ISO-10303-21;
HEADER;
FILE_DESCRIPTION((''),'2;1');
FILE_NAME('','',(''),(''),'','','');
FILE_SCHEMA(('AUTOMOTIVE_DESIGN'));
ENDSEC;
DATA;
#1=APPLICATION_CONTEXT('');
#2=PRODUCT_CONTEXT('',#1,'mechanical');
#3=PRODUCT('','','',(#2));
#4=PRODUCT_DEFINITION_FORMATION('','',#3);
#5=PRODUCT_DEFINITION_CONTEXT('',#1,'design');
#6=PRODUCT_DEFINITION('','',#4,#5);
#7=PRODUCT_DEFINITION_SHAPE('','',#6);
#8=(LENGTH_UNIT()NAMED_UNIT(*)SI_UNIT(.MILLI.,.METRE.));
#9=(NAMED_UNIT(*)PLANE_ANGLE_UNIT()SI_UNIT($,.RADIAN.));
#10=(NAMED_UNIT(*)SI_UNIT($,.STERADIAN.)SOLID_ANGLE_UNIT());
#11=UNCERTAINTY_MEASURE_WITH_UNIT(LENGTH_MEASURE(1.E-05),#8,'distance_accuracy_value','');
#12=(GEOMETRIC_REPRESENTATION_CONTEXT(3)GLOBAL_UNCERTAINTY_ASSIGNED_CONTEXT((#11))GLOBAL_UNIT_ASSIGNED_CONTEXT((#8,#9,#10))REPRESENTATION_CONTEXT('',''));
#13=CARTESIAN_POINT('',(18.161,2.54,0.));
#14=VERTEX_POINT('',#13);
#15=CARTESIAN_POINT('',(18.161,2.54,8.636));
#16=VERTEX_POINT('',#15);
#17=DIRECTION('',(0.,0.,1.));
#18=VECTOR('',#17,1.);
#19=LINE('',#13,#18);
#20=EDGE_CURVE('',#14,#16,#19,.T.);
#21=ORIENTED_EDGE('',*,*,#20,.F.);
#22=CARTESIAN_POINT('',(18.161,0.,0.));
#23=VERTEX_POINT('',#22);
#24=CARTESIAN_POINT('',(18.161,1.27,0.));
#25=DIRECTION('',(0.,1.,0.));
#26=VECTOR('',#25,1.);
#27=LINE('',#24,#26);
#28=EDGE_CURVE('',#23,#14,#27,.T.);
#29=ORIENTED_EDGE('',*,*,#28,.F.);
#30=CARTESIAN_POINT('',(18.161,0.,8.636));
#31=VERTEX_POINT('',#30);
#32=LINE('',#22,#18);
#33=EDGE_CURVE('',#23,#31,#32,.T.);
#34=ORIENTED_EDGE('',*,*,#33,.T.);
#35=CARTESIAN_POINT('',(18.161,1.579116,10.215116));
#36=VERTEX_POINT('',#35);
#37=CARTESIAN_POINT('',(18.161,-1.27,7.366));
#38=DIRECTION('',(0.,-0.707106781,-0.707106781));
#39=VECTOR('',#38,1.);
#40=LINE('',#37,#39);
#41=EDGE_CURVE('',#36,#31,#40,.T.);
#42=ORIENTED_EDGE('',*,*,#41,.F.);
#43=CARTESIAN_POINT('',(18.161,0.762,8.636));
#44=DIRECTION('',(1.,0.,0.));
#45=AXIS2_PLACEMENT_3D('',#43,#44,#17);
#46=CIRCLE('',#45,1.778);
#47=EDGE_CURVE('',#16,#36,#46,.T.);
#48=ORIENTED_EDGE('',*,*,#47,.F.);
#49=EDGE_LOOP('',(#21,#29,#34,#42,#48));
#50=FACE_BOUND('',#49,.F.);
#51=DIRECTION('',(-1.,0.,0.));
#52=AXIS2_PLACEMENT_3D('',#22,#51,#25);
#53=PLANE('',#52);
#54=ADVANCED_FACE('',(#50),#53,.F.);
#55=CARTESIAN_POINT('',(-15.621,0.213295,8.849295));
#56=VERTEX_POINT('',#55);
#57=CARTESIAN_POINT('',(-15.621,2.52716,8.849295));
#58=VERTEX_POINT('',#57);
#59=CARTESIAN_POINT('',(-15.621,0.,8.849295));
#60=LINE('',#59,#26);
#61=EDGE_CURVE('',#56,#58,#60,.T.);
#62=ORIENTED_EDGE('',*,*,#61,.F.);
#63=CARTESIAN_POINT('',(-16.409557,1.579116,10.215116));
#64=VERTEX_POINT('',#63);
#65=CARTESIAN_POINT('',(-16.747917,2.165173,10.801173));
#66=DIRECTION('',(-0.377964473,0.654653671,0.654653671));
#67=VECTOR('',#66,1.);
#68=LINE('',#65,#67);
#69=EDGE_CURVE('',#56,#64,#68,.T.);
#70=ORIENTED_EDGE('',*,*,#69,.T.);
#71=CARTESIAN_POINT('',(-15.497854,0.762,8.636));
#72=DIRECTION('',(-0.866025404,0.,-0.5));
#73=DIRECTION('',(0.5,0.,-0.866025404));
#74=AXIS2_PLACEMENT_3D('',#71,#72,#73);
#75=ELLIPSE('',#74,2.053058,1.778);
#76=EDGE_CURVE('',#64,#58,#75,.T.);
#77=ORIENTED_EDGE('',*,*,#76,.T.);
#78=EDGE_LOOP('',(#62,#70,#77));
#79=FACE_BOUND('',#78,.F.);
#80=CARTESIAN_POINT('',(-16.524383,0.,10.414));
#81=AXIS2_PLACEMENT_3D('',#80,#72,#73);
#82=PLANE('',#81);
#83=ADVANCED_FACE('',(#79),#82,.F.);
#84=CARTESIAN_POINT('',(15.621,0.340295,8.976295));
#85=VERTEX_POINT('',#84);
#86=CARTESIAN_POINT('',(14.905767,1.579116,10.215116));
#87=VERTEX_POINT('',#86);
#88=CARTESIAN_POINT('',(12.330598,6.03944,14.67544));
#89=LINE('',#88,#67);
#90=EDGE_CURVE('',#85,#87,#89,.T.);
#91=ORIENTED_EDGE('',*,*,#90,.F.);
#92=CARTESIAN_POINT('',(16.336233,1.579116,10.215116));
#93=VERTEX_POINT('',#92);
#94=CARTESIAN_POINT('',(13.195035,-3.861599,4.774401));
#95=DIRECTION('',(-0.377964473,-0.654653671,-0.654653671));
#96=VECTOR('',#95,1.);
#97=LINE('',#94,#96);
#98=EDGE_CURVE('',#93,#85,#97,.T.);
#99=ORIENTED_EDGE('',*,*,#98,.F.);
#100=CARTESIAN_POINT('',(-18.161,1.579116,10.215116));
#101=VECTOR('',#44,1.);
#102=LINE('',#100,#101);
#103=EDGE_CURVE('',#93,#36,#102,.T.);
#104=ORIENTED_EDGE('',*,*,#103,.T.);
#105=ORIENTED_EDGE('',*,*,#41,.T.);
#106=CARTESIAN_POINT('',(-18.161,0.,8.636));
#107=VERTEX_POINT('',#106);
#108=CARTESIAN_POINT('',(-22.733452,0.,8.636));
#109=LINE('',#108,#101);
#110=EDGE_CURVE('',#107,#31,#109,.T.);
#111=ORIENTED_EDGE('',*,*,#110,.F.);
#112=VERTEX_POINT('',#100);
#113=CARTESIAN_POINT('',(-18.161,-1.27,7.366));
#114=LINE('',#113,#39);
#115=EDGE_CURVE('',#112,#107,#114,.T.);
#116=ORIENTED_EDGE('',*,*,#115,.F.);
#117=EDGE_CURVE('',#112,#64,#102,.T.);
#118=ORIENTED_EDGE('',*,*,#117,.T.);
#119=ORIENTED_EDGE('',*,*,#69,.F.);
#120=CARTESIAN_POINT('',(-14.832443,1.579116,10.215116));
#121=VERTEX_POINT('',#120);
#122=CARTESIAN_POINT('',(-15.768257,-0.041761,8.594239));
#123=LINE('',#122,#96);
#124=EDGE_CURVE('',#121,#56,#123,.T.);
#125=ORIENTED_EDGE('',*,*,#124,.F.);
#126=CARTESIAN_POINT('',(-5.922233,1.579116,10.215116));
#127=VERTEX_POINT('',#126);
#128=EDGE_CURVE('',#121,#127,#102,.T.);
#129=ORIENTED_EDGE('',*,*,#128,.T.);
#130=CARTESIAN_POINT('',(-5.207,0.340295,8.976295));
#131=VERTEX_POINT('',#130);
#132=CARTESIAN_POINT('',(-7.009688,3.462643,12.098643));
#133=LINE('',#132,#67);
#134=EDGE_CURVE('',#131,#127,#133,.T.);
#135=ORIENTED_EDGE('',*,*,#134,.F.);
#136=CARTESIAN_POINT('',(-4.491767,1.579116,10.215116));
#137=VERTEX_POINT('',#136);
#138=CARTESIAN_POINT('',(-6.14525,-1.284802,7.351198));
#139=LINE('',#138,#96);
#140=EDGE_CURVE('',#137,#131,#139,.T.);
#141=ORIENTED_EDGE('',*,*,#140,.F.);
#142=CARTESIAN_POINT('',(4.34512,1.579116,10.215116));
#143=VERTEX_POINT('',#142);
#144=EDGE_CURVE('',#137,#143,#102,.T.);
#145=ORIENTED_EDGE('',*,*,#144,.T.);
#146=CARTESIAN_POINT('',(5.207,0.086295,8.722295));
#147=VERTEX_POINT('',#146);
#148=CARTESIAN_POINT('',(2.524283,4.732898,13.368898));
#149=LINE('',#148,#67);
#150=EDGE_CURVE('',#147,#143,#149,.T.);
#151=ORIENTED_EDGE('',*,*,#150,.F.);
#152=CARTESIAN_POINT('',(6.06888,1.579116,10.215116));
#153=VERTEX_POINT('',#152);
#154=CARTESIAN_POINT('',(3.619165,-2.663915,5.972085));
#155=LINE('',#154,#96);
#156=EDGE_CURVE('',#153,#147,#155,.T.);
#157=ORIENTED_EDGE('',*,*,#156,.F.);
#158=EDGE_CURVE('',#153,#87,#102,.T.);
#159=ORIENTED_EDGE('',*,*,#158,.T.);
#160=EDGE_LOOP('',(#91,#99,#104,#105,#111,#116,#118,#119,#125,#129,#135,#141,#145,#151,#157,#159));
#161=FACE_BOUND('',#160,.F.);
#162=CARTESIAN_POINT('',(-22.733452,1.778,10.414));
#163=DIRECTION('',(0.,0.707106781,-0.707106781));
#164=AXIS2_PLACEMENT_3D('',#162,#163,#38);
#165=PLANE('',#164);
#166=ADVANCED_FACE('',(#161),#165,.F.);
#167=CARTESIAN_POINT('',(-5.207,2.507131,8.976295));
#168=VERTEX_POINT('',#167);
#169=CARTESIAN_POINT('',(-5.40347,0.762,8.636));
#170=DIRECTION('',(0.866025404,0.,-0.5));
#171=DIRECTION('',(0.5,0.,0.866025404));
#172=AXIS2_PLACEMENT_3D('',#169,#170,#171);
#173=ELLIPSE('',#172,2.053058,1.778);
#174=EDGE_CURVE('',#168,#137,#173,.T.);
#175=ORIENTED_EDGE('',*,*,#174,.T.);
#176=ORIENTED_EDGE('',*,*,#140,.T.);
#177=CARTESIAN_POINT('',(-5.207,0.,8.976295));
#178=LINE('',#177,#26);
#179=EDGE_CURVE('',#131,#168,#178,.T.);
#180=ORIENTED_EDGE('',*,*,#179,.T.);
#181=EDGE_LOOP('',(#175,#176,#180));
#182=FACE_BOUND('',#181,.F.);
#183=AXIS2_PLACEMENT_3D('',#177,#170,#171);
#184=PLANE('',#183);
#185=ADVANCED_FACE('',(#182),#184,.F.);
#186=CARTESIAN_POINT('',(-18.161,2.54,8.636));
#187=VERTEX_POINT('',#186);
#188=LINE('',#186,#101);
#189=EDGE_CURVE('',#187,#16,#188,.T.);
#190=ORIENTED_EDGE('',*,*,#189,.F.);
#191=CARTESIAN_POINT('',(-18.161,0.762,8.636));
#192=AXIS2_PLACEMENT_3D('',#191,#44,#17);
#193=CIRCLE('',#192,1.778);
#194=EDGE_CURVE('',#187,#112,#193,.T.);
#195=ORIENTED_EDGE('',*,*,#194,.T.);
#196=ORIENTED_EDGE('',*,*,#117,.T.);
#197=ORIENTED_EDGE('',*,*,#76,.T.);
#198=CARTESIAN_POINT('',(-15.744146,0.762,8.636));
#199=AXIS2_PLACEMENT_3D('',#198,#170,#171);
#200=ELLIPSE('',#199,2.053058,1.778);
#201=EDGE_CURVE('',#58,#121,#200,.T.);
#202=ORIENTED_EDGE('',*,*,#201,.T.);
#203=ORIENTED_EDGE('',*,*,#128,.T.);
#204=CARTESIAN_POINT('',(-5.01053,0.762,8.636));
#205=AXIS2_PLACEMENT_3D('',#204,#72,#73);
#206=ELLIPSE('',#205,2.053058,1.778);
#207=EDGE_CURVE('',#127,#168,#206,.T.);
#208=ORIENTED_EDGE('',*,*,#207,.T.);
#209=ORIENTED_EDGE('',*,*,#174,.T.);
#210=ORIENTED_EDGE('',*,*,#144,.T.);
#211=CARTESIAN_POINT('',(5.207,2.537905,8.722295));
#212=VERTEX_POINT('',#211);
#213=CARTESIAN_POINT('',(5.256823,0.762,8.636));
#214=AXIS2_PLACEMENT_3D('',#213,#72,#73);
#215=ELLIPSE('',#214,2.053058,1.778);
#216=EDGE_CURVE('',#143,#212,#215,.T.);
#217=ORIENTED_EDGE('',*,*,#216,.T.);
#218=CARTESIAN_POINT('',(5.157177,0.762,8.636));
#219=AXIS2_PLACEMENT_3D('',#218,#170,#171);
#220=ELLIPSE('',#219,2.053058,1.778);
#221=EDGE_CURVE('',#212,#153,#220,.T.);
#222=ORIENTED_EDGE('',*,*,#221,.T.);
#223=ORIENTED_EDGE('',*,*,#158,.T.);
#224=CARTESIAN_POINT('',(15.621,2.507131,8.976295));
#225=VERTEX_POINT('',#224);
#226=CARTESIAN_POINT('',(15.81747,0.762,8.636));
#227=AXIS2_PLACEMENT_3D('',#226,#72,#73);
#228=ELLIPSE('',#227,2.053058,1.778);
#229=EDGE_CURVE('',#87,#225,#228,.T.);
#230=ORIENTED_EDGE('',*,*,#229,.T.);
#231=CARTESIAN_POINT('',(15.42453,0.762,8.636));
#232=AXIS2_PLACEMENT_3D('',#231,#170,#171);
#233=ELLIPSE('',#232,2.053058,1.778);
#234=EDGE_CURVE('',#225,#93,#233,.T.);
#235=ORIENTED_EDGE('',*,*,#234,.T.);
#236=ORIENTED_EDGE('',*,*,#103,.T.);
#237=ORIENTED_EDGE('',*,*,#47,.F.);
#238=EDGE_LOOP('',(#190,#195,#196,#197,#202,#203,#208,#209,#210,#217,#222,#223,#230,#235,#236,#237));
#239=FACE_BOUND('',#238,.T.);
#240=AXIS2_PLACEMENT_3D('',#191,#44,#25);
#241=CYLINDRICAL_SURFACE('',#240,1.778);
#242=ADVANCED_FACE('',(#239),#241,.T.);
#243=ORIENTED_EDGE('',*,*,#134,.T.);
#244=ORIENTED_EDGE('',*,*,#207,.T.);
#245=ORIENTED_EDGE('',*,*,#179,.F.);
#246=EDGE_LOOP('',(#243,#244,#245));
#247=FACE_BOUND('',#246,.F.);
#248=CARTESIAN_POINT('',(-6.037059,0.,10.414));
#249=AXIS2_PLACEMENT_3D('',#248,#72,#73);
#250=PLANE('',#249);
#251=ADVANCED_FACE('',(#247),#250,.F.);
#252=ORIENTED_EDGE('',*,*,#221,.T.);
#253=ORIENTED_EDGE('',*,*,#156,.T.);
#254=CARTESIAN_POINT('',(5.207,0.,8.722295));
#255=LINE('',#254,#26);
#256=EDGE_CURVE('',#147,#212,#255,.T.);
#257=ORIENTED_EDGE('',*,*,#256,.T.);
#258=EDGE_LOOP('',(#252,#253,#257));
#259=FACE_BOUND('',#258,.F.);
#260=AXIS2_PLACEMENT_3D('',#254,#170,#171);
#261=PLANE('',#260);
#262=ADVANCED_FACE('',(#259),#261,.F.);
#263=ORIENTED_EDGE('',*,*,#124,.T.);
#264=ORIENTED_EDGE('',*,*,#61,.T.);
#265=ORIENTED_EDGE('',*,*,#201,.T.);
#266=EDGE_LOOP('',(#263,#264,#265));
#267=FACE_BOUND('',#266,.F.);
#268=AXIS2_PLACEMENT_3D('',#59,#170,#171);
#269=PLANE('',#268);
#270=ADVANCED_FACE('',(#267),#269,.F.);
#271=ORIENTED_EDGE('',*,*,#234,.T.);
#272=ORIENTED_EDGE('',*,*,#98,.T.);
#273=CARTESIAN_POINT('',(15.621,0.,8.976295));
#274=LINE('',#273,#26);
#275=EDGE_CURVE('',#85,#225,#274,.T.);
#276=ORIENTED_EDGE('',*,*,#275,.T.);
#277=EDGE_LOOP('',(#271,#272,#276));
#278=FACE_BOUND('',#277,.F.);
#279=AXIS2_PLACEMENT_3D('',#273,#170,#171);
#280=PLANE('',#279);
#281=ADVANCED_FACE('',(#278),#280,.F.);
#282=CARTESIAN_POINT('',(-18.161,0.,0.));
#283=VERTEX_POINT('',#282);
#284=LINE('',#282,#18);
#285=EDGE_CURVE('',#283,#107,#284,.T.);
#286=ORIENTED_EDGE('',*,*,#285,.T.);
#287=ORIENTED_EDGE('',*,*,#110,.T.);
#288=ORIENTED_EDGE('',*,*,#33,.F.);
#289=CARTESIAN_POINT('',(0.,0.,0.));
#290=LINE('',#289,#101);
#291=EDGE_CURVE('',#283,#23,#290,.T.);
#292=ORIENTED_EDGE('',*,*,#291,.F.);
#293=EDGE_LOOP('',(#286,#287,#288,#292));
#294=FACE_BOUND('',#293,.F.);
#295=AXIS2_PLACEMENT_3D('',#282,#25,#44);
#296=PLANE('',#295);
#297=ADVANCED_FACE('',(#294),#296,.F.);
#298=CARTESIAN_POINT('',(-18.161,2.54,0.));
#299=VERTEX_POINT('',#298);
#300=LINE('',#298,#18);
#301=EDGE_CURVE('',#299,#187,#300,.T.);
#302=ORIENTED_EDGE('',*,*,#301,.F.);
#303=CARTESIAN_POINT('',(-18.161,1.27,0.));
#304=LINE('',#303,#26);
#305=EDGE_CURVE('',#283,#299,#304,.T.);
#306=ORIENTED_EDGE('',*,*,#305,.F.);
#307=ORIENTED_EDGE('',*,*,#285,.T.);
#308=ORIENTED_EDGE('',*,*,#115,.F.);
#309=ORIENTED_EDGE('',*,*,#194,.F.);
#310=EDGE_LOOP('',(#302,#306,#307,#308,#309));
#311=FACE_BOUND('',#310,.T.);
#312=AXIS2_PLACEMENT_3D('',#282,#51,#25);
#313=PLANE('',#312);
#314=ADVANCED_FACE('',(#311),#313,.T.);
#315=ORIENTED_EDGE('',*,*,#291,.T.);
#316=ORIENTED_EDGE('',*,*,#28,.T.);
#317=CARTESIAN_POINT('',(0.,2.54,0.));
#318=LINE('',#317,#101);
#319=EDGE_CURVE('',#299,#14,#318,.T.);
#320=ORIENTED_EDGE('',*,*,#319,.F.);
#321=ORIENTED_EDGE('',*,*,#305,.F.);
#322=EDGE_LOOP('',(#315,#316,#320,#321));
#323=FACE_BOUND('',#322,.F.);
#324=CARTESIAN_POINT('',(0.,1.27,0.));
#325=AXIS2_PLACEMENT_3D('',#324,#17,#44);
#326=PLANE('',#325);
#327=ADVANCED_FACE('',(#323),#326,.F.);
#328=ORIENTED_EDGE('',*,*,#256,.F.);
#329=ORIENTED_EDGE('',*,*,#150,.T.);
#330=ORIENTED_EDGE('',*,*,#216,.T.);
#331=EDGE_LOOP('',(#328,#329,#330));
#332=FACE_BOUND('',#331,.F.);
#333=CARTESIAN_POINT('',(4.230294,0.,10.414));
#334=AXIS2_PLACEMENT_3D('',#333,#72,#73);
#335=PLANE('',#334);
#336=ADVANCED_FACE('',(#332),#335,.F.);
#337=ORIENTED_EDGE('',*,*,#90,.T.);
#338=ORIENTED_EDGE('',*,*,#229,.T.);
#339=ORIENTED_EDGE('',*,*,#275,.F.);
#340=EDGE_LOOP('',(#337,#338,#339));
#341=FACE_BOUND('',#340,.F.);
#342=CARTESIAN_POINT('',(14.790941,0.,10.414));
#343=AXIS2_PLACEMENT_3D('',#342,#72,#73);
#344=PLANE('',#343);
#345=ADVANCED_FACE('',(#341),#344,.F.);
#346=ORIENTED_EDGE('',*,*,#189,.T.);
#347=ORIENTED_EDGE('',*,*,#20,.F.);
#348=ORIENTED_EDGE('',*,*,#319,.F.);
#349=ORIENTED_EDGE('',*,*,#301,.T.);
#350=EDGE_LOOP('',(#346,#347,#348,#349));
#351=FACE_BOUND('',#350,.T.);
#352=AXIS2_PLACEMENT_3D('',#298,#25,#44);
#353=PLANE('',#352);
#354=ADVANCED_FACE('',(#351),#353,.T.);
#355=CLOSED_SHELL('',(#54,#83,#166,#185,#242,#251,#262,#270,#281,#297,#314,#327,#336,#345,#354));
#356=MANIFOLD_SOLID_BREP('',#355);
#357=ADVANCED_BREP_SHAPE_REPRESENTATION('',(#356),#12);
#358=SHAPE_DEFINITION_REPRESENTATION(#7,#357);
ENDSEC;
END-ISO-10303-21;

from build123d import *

# Parameters (mm, degrees)
F0_W        = 36.322
F0_H        = 2.54
F1_DEPTH    = 10.414
F3_R        = 1.778
F4_T1_DEPTH = 45.4669047052
F5_DEPTH    = 25.4


# Not quite as in the source:
# - a fillet or chamfer that OpenCascade refuses, or shapes differently, is made with other operations: its cross-section is extruded or revolved along the edge and cut away or added


with BuildPart() as f1:
    # F0 (on Top) → F1 (new body)
    with BuildSketch(Plane.XY):
        with Locations((0, 1.27)):
            Rectangle(F0_W, F0_H)
    extrude(amount=F1_DEPTH)

    # F3
    f3_edges = [f1.edges().sort_by_distance(p)[0] for p in [
        (0, 2.54, 10.414),
    ]]
    fillet(f3_edges, radius=F3_R)

    # F4: chamfer of 1.778 on 1 edges, made by hand

    # F4_s2 → F4_t1 (cut)
    with BuildSketch(Plane.YZ.offset(-22.7334523526)):
        Polygon((1.778, 10.414), (0, 8.636), (0, 10.414), align=None)
    extrude(amount=F4_T1_DEPTH, mode=Mode.SUBTRACT)

    # F2 (on face) → F5 (cut)
    with BuildSketch(Plane.XZ):
        Polygon((-15.621, 8.8492954744), (-14.7176174209, 10.414), (-16.5243825791, 10.414), align=None)
        Polygon((-4.3769409051, 10.414), (-6.0370590949, 10.414), (-5.207, 8.9762954744), align=None)
        Polygon((6.1837060633, 10.414), (4.2302939367, 10.414), (5.207, 8.7222954744), align=None)
        Polygon((16.4510590949, 10.414), (14.7909409051, 10.414), (15.621, 8.9762954744), align=None)
    extrude(amount=-F5_DEPTH, mode=Mode.SUBTRACT)


solid = f1.part
